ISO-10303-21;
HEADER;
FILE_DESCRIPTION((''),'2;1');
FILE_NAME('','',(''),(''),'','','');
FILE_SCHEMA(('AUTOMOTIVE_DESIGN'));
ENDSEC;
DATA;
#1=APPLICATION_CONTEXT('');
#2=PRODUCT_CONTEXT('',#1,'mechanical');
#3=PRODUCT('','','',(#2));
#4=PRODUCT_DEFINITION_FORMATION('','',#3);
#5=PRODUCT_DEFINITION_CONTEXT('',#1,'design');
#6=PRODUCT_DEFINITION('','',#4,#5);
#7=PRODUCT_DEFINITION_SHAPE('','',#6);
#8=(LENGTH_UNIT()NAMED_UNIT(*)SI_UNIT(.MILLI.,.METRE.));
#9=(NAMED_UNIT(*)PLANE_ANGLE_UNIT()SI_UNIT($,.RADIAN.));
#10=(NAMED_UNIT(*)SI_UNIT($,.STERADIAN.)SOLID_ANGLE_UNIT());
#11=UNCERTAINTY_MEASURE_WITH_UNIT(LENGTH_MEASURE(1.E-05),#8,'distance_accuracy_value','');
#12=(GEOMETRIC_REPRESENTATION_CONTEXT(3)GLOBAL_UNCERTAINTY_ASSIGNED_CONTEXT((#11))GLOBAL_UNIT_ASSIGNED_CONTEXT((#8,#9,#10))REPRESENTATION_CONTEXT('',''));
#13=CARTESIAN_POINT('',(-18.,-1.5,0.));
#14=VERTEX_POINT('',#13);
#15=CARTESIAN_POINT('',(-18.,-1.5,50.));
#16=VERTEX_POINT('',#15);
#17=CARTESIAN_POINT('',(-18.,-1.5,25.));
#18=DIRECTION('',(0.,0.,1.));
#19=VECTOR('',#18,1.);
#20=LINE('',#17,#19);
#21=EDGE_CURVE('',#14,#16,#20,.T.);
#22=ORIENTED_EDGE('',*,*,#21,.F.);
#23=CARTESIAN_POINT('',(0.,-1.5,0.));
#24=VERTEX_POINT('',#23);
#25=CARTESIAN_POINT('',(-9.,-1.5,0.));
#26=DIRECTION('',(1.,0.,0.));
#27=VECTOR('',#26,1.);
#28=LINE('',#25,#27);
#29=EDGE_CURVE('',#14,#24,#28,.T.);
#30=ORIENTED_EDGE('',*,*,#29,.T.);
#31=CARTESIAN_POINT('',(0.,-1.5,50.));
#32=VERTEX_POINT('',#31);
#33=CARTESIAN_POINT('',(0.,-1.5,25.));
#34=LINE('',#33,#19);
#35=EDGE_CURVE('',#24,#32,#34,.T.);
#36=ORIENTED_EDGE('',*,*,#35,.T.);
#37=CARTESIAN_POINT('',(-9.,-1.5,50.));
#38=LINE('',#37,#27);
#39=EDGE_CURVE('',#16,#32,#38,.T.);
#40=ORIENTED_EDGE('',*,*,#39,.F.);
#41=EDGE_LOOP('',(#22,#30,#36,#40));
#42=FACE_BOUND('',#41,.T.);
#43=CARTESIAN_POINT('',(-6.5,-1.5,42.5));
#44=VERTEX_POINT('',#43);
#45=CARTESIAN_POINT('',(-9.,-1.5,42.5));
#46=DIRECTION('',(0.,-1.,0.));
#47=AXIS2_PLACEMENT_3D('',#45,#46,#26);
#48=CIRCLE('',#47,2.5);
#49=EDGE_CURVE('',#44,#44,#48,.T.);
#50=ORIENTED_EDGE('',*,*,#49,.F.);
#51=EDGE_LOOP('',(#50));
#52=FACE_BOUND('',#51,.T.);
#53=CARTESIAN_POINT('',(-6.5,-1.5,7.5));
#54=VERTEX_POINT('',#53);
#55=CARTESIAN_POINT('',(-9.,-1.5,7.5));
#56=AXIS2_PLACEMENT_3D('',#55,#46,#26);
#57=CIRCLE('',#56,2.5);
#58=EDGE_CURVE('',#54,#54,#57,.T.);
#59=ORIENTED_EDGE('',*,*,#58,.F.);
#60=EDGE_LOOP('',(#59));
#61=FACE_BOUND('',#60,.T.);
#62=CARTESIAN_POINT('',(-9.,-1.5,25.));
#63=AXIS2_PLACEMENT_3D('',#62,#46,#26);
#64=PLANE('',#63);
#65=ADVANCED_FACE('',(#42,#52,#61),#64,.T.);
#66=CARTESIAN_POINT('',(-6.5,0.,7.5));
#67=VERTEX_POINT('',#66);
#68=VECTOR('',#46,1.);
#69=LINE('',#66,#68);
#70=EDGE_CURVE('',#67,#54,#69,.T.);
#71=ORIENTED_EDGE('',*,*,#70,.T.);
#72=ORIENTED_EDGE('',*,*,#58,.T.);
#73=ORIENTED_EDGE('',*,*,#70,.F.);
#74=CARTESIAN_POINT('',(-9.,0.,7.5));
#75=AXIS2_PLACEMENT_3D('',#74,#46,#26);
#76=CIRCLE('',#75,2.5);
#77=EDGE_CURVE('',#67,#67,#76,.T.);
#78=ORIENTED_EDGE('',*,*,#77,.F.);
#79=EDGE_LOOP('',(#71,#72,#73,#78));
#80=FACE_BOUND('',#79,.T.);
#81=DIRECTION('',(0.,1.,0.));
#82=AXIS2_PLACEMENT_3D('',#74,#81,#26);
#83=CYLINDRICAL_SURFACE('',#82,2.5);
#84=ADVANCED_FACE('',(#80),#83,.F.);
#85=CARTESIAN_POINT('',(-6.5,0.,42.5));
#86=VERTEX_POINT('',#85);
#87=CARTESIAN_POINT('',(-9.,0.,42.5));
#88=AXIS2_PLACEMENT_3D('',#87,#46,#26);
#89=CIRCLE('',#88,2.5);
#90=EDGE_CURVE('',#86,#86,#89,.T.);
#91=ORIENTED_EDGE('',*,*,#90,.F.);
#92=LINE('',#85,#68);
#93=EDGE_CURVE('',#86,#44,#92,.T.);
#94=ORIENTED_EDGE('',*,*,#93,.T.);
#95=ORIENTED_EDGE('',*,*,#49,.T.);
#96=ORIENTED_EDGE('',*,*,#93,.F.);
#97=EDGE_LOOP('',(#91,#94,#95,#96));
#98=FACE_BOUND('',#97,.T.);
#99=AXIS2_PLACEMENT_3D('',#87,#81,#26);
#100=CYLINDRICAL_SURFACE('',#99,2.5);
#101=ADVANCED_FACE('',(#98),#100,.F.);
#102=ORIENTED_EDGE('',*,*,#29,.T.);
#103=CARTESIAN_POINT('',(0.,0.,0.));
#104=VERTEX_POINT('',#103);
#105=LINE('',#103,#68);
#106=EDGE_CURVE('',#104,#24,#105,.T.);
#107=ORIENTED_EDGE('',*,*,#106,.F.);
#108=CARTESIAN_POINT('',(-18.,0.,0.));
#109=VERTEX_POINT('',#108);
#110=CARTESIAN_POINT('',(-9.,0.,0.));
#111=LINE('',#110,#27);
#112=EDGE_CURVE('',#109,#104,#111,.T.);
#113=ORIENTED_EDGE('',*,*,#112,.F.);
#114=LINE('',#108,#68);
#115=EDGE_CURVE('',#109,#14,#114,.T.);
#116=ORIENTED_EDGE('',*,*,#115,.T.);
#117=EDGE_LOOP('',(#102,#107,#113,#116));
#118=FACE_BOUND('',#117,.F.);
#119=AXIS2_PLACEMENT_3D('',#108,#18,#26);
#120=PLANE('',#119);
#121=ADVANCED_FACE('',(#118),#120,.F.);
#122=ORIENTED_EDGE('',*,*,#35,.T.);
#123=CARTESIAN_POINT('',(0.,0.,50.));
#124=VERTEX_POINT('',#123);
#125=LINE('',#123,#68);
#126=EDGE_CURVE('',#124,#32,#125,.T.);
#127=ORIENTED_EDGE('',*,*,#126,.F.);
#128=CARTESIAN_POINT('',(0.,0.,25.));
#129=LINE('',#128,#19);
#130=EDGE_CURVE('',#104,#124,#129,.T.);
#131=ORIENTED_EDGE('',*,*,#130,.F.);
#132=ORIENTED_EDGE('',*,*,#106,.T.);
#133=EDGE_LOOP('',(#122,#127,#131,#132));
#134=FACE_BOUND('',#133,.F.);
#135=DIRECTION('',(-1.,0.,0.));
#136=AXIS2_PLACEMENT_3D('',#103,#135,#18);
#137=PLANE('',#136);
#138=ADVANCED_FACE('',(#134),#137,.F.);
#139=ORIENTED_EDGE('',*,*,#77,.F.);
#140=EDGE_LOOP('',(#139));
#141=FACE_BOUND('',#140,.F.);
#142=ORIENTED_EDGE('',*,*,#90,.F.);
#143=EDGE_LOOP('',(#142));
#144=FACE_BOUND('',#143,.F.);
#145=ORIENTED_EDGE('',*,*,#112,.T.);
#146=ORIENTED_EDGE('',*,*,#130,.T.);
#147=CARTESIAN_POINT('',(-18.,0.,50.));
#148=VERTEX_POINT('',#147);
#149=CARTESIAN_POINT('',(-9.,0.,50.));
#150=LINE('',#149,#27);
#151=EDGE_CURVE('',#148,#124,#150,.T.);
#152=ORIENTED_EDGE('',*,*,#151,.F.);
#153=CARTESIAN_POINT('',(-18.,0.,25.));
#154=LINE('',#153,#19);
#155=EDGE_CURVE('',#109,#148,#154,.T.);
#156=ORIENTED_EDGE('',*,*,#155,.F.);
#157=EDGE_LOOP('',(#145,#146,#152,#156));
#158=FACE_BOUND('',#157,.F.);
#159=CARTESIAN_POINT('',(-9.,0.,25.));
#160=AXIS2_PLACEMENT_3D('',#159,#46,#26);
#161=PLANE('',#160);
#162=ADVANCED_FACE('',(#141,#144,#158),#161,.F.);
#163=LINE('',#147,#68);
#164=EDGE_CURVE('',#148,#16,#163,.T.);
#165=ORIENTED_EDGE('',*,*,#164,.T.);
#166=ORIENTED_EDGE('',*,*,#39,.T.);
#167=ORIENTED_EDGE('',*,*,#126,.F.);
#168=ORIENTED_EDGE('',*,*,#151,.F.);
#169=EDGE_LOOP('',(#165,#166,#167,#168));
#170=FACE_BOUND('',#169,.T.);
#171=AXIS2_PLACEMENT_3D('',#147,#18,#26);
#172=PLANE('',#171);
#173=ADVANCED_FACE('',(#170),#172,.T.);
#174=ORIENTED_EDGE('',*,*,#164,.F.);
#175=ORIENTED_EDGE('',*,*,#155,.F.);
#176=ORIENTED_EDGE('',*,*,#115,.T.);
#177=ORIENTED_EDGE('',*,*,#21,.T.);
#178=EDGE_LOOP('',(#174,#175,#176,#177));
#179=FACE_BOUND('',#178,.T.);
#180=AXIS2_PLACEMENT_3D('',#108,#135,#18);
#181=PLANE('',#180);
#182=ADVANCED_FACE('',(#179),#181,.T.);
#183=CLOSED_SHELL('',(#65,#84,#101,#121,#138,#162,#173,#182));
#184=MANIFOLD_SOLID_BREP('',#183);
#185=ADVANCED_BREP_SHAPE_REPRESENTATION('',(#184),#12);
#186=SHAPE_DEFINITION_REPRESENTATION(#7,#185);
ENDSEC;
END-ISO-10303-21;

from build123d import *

# Parameters (mm, degrees)
F0_W     = 18
F0_H     = 50
F0_R     = 2.5
F1_DEPTH = 1.5


# Not quite as in the source:
# - a feature names something its author has since deleted; it is built from what else it names


with BuildPart() as f1:
    # F0 (on Front) → F1 (new body)
    with BuildSketch(Plane.XZ):
        with Locations((-9, 25)):
            Rectangle(F0_W, F0_H)
        with Locations((-9, 7.5)):
            Circle(F0_R, mode=Mode.SUBTRACT)
        with Locations((-9, 42.5)):
            Circle(F0_R, mode=Mode.SUBTRACT)
    extrude(amount=F1_DEPTH)


solid = f1.part
